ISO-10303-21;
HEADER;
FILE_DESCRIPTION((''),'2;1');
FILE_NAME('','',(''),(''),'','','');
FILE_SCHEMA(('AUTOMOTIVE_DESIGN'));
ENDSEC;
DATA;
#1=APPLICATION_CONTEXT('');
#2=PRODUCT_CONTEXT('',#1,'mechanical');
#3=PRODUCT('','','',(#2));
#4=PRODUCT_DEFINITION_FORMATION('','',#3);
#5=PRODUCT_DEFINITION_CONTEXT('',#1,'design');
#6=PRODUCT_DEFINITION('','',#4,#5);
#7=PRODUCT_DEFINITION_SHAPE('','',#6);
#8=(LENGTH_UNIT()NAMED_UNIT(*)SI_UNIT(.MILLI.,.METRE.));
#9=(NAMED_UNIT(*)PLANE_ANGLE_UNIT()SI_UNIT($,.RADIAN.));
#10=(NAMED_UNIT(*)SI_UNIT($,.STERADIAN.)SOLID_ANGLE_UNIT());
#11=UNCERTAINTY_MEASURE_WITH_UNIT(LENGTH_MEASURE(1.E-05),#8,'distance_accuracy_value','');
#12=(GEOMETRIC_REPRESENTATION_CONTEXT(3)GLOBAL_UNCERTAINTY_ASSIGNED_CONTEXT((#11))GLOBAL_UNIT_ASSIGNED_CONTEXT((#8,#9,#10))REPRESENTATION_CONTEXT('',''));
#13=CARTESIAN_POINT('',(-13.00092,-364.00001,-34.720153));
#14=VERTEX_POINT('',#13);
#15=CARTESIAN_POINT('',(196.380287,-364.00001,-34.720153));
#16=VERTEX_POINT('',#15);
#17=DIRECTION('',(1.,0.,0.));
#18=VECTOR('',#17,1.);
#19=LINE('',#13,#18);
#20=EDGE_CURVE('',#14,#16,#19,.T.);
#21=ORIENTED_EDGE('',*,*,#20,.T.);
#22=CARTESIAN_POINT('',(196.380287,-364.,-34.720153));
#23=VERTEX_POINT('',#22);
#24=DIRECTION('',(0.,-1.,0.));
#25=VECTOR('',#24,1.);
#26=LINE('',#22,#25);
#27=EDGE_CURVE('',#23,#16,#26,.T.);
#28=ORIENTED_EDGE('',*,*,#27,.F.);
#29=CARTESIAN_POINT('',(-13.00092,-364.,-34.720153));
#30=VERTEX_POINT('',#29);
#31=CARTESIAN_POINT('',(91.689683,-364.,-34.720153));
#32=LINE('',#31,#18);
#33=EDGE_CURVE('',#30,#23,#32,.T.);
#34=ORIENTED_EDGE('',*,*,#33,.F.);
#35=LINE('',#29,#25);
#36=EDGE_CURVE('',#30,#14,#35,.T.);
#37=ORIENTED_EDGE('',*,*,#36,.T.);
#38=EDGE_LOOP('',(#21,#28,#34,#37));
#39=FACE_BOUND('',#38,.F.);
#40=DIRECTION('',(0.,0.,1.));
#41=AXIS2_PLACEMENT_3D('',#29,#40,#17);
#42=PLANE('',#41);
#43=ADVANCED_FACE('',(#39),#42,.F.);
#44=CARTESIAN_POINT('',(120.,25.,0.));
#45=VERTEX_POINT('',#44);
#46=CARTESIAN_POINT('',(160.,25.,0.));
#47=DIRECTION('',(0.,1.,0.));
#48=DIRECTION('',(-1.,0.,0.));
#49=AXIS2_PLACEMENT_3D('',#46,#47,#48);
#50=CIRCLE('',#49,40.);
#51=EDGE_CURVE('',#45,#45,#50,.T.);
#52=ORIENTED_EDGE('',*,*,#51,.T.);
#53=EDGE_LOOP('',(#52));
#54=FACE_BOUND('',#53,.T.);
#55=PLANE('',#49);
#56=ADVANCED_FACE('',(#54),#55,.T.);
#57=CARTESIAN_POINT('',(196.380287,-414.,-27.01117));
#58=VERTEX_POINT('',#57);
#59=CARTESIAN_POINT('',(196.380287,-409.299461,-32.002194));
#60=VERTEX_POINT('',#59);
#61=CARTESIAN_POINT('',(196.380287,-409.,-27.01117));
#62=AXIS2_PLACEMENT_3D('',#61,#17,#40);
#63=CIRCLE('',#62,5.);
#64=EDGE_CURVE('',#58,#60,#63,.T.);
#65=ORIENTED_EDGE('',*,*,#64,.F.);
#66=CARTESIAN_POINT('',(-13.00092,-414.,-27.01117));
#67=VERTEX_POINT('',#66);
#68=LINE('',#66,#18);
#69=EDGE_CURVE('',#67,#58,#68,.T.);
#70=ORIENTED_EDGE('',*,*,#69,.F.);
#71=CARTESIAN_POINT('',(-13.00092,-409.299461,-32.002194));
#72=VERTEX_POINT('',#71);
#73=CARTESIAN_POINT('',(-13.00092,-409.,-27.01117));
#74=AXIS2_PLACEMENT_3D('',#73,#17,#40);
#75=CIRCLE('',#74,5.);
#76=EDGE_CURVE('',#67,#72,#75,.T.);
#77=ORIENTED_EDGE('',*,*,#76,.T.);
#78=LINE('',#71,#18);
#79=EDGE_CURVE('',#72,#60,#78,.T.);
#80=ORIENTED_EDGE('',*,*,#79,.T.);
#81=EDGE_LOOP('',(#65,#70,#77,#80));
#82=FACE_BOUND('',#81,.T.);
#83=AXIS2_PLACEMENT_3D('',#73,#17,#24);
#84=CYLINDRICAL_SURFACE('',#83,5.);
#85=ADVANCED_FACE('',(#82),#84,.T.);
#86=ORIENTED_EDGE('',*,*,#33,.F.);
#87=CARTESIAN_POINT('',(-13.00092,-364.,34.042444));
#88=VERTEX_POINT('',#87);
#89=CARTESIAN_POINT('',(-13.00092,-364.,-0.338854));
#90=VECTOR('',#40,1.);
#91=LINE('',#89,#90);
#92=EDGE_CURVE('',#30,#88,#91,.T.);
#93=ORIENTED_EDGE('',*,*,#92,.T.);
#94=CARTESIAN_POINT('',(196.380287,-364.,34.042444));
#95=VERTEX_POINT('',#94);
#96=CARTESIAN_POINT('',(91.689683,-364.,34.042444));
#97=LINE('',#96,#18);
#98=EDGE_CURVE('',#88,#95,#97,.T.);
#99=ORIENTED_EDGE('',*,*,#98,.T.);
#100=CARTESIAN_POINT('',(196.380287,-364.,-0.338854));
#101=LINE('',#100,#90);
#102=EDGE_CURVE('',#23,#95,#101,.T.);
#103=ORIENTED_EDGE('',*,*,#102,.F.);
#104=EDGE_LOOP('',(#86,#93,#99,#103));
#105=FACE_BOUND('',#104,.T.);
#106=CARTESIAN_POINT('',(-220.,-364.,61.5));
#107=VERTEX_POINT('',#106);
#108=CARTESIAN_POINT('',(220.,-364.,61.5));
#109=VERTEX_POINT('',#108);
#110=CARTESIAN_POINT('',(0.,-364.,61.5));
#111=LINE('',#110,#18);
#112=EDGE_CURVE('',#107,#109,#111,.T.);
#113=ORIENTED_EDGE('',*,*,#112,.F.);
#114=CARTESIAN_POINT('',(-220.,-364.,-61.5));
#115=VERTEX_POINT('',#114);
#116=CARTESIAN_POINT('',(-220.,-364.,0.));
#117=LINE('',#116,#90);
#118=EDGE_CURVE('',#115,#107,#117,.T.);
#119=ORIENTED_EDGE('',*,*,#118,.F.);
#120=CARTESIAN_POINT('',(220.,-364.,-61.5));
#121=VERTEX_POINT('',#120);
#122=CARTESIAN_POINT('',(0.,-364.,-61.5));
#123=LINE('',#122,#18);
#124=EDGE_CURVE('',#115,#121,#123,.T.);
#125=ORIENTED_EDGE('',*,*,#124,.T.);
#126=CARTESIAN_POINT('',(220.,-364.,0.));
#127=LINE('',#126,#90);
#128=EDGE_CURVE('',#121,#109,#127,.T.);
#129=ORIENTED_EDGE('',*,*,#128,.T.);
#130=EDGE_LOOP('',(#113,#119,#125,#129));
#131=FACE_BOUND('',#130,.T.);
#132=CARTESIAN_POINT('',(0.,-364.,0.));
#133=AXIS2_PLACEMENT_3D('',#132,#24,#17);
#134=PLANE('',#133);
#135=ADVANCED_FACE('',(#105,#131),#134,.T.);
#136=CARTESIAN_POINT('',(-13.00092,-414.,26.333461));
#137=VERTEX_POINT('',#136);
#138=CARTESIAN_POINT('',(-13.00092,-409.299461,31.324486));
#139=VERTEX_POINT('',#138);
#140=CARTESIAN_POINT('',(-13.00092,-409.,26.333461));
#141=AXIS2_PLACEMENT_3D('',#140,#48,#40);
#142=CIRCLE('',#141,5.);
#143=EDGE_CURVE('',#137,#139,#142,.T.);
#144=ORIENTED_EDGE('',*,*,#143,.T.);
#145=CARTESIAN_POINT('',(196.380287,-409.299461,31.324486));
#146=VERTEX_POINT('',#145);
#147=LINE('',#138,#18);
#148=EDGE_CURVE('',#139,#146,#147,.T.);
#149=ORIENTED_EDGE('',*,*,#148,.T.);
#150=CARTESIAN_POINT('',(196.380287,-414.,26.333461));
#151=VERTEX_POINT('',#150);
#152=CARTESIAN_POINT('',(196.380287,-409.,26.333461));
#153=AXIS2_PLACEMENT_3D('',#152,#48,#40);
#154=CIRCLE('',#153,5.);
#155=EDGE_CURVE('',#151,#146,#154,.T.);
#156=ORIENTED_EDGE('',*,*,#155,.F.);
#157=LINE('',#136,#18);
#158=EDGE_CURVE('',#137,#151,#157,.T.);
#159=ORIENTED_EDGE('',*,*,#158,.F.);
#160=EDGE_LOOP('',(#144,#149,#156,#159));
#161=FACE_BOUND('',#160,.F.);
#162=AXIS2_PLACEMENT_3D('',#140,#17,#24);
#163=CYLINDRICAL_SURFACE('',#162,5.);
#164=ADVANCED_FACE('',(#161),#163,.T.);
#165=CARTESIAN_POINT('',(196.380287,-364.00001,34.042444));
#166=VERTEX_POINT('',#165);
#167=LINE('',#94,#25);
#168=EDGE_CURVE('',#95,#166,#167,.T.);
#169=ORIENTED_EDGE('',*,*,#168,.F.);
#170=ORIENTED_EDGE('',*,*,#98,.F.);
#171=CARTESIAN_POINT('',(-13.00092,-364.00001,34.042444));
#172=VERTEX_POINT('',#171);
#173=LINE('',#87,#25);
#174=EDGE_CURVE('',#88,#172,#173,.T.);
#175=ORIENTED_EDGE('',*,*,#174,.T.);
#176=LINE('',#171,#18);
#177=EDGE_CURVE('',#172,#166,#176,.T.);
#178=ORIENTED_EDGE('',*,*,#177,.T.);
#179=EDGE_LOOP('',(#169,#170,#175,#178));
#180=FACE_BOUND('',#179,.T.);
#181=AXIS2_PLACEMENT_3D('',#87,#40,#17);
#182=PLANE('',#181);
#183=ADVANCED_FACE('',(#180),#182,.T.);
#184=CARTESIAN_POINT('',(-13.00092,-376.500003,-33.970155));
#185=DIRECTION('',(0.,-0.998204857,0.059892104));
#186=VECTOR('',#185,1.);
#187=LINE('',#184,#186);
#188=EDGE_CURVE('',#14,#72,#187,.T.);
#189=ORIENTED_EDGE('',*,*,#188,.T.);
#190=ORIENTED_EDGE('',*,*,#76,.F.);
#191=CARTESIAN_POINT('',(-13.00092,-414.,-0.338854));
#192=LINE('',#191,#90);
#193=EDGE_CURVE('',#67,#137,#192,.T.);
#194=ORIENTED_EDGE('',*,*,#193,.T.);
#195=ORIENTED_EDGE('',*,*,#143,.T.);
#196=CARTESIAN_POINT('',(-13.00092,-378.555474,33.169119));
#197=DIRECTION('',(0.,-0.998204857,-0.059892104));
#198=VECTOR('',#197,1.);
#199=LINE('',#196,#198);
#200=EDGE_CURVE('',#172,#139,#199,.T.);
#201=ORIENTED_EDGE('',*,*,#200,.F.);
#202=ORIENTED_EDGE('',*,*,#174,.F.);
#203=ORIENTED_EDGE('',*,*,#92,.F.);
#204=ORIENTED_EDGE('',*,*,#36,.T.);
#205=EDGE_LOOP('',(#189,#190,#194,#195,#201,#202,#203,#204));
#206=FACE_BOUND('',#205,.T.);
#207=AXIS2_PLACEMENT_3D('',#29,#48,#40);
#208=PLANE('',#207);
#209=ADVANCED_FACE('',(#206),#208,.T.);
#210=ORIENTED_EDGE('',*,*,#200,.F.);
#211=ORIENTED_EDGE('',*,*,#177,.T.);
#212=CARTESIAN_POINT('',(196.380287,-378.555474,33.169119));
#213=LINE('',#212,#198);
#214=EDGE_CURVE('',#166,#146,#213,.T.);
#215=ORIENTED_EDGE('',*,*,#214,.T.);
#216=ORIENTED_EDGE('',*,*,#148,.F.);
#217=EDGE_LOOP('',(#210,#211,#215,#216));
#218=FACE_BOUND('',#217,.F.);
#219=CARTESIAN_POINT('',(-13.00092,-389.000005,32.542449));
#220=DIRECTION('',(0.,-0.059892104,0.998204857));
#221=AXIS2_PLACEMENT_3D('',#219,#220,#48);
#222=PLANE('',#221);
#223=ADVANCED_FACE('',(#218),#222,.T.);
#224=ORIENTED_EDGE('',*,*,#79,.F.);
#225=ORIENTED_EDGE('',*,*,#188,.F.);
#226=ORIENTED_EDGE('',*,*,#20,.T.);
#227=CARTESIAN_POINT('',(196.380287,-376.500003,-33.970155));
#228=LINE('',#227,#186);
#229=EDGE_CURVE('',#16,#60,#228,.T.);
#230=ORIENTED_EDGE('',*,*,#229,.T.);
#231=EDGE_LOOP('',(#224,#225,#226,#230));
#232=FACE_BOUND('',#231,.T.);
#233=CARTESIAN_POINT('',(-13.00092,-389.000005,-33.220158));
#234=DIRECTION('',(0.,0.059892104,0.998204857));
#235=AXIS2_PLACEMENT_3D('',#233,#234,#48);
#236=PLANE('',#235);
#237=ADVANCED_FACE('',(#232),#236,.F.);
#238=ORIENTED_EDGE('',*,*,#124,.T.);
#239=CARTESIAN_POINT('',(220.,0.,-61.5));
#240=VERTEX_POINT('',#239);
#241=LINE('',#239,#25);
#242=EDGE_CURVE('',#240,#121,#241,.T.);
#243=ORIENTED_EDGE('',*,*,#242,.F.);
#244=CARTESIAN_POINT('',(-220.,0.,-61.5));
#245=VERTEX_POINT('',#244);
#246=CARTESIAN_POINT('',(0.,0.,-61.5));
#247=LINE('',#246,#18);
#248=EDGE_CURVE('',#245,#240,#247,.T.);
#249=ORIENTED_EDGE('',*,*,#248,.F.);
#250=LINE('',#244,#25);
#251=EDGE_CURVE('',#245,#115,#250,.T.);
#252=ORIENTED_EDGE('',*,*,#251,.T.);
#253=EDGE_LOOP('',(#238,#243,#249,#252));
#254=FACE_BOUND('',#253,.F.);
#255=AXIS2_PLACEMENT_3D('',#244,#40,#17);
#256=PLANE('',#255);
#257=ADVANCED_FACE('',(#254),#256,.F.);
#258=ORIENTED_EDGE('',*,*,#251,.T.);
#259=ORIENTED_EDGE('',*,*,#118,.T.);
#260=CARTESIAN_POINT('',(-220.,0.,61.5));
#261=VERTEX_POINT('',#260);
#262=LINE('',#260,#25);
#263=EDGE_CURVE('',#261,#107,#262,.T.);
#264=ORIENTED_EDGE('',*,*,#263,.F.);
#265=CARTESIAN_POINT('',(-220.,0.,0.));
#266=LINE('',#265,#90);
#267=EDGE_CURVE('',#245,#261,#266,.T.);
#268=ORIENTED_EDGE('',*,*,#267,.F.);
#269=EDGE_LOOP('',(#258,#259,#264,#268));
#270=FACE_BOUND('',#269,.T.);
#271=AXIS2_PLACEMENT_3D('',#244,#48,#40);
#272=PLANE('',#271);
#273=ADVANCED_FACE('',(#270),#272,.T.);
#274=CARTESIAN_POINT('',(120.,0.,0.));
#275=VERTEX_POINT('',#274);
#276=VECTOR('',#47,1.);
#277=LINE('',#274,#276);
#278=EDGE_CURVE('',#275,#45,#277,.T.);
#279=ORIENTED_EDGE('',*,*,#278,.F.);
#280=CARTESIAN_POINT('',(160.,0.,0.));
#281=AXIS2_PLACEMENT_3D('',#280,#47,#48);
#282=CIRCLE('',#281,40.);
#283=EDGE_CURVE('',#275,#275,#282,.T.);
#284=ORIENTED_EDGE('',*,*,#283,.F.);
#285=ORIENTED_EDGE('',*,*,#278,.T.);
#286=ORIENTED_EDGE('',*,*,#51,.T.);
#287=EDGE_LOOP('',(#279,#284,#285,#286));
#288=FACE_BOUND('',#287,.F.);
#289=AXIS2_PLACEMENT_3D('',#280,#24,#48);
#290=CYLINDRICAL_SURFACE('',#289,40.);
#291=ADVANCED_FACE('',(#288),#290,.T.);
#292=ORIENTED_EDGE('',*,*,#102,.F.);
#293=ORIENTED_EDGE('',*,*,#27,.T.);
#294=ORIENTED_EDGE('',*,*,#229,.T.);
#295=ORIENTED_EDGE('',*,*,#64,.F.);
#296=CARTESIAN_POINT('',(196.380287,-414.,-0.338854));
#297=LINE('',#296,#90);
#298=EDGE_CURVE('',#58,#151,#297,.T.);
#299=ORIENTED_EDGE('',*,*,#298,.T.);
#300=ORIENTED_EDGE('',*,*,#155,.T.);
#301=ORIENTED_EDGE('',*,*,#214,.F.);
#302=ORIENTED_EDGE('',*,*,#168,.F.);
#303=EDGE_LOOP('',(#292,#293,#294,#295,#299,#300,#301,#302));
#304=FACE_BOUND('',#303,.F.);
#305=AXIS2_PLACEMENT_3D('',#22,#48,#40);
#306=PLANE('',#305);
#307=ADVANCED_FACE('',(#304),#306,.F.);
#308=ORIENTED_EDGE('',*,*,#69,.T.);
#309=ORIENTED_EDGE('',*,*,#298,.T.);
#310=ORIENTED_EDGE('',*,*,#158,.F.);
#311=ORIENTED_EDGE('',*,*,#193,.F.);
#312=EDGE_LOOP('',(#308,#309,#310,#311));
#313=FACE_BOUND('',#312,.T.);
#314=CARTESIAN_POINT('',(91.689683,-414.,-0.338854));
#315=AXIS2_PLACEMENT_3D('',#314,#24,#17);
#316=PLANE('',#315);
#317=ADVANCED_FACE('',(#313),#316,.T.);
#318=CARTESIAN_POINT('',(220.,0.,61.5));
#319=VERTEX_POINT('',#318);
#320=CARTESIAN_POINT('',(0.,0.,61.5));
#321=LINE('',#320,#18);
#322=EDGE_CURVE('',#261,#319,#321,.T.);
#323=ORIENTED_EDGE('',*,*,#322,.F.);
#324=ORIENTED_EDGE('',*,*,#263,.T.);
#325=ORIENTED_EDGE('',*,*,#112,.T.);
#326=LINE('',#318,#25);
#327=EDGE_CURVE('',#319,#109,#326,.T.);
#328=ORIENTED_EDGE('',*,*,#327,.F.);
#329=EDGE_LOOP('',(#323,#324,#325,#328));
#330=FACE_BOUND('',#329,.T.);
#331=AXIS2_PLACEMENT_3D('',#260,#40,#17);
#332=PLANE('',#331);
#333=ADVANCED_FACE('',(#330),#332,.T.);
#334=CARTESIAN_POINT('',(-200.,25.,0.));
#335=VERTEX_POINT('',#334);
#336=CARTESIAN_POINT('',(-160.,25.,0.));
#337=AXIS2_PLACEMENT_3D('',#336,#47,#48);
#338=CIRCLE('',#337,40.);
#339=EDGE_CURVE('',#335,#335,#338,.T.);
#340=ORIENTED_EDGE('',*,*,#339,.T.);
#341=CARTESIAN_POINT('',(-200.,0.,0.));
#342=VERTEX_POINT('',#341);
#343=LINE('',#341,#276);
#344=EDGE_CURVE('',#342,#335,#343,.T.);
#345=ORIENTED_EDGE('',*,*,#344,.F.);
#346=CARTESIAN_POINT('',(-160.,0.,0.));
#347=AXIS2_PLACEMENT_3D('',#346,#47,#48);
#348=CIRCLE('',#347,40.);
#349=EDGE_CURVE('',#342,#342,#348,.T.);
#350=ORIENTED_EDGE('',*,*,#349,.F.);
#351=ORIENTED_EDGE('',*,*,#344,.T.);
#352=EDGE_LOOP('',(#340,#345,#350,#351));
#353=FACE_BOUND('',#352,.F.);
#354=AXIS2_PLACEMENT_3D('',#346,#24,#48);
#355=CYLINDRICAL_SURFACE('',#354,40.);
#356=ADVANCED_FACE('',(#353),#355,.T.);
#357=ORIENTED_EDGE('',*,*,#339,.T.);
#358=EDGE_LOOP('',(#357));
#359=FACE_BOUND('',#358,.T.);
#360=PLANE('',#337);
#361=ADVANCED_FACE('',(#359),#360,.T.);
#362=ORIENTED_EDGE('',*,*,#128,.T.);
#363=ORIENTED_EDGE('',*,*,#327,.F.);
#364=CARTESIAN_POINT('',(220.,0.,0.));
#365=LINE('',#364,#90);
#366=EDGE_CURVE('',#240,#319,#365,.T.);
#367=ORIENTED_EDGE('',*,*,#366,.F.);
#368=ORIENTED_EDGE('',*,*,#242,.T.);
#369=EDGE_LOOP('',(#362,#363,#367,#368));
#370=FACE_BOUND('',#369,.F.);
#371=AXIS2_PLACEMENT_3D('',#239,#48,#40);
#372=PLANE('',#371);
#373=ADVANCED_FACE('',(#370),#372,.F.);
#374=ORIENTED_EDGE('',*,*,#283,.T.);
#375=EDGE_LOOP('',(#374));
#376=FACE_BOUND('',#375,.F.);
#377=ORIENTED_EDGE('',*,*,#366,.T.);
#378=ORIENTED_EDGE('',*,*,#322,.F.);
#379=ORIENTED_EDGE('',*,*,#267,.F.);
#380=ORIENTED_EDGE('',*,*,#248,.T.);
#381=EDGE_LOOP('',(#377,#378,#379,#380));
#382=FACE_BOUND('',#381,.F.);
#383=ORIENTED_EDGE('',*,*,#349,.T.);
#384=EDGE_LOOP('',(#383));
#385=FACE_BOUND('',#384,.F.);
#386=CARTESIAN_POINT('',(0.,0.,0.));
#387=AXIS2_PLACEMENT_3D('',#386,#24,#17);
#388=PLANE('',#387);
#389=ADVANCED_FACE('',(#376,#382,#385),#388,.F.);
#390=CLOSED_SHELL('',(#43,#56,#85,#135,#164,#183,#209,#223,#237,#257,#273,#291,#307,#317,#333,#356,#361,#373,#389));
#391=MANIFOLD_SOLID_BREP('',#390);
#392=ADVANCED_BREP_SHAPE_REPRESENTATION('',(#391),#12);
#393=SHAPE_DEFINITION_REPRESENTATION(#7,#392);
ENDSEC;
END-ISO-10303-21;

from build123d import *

# Parameters (mm, degrees)
F0_W       = 440
F0_H       = 123
F1_DEPTH   = 364
F2_R       = 40
F3_DEPTH   = 25
F4_W       = 209.3812078238
F4_H       = 68.7625966966
F5_DEPTH   = 50
F6_SIZE2   = 2.99999
F6_SIZE    = 49.99999
F6_2_SIZE2 = 2.99999
F6_2_SIZE  = 49.99999
F7_R       = 5


# Not quite as in the source:
# - a fillet or chamfer is up to 0.001 mm smaller than in the source, because OpenCascade refuses the exact size


with BuildPart() as f1:
    # F0 (on Front) → F1 (new body)
    with BuildSketch(Plane.XZ):
        Rectangle(F0_W, F0_H)
    extrude(amount=F1_DEPTH)

    # F2 (on face) → F3 (join)
    with BuildSketch(Plane(origin=(0, 0, 0), x_dir=(-1, 0, 0), z_dir=(0, 1, 0))):
        with Locations((-160, 0)):
            Circle(F2_R)
        with Locations((160, 0)):
            Circle(F2_R)
    extrude(amount=F3_DEPTH)

    # F4 (on face) → F5 (join)
    with BuildSketch(Plane.XZ.offset(364)):
        with Locations((91.689683497, -0.3388542682)):
            Rectangle(F4_W, F4_H)
    extrude(amount=F5_DEPTH)

    # F6 (size 50 and 3 in the source; OpenCascade refuses exactly that, so slightly less here)
    f6_edges = [f1.edges().sort_by_distance(p)[0] for p in [
        (91.689683, -414, 34.042444),
    ]]
    f6_side = f1.faces().sort_by_distance((91.689683, -389, 34.042444))[0]
    chamfer(f6_edges, length=F6_SIZE, length2=F6_SIZE2, reference=f6_side)

    # F6#2 (size 50 and 3 in the source; OpenCascade refuses exactly that, so slightly less here)
    f6_2_edges = [f1.edges().sort_by_distance(p)[0] for p in [
        (91.689683, -414, -34.720153),
    ]]
    f6_2_side = f1.faces().sort_by_distance((91.689683, -389, -34.720153))[0]
    chamfer(f6_2_edges, length=F6_2_SIZE, length2=F6_2_SIZE2, reference=f6_2_side)

    # F7
    f7_edges = [f1.edges().sort_by_distance(p)[0] for p in [
        (91.689683, -414, 31.042454),
        (91.689683, -414, -31.720163),
    ]]
    fillet(f7_edges, radius=F7_R)


solid = f1.part
